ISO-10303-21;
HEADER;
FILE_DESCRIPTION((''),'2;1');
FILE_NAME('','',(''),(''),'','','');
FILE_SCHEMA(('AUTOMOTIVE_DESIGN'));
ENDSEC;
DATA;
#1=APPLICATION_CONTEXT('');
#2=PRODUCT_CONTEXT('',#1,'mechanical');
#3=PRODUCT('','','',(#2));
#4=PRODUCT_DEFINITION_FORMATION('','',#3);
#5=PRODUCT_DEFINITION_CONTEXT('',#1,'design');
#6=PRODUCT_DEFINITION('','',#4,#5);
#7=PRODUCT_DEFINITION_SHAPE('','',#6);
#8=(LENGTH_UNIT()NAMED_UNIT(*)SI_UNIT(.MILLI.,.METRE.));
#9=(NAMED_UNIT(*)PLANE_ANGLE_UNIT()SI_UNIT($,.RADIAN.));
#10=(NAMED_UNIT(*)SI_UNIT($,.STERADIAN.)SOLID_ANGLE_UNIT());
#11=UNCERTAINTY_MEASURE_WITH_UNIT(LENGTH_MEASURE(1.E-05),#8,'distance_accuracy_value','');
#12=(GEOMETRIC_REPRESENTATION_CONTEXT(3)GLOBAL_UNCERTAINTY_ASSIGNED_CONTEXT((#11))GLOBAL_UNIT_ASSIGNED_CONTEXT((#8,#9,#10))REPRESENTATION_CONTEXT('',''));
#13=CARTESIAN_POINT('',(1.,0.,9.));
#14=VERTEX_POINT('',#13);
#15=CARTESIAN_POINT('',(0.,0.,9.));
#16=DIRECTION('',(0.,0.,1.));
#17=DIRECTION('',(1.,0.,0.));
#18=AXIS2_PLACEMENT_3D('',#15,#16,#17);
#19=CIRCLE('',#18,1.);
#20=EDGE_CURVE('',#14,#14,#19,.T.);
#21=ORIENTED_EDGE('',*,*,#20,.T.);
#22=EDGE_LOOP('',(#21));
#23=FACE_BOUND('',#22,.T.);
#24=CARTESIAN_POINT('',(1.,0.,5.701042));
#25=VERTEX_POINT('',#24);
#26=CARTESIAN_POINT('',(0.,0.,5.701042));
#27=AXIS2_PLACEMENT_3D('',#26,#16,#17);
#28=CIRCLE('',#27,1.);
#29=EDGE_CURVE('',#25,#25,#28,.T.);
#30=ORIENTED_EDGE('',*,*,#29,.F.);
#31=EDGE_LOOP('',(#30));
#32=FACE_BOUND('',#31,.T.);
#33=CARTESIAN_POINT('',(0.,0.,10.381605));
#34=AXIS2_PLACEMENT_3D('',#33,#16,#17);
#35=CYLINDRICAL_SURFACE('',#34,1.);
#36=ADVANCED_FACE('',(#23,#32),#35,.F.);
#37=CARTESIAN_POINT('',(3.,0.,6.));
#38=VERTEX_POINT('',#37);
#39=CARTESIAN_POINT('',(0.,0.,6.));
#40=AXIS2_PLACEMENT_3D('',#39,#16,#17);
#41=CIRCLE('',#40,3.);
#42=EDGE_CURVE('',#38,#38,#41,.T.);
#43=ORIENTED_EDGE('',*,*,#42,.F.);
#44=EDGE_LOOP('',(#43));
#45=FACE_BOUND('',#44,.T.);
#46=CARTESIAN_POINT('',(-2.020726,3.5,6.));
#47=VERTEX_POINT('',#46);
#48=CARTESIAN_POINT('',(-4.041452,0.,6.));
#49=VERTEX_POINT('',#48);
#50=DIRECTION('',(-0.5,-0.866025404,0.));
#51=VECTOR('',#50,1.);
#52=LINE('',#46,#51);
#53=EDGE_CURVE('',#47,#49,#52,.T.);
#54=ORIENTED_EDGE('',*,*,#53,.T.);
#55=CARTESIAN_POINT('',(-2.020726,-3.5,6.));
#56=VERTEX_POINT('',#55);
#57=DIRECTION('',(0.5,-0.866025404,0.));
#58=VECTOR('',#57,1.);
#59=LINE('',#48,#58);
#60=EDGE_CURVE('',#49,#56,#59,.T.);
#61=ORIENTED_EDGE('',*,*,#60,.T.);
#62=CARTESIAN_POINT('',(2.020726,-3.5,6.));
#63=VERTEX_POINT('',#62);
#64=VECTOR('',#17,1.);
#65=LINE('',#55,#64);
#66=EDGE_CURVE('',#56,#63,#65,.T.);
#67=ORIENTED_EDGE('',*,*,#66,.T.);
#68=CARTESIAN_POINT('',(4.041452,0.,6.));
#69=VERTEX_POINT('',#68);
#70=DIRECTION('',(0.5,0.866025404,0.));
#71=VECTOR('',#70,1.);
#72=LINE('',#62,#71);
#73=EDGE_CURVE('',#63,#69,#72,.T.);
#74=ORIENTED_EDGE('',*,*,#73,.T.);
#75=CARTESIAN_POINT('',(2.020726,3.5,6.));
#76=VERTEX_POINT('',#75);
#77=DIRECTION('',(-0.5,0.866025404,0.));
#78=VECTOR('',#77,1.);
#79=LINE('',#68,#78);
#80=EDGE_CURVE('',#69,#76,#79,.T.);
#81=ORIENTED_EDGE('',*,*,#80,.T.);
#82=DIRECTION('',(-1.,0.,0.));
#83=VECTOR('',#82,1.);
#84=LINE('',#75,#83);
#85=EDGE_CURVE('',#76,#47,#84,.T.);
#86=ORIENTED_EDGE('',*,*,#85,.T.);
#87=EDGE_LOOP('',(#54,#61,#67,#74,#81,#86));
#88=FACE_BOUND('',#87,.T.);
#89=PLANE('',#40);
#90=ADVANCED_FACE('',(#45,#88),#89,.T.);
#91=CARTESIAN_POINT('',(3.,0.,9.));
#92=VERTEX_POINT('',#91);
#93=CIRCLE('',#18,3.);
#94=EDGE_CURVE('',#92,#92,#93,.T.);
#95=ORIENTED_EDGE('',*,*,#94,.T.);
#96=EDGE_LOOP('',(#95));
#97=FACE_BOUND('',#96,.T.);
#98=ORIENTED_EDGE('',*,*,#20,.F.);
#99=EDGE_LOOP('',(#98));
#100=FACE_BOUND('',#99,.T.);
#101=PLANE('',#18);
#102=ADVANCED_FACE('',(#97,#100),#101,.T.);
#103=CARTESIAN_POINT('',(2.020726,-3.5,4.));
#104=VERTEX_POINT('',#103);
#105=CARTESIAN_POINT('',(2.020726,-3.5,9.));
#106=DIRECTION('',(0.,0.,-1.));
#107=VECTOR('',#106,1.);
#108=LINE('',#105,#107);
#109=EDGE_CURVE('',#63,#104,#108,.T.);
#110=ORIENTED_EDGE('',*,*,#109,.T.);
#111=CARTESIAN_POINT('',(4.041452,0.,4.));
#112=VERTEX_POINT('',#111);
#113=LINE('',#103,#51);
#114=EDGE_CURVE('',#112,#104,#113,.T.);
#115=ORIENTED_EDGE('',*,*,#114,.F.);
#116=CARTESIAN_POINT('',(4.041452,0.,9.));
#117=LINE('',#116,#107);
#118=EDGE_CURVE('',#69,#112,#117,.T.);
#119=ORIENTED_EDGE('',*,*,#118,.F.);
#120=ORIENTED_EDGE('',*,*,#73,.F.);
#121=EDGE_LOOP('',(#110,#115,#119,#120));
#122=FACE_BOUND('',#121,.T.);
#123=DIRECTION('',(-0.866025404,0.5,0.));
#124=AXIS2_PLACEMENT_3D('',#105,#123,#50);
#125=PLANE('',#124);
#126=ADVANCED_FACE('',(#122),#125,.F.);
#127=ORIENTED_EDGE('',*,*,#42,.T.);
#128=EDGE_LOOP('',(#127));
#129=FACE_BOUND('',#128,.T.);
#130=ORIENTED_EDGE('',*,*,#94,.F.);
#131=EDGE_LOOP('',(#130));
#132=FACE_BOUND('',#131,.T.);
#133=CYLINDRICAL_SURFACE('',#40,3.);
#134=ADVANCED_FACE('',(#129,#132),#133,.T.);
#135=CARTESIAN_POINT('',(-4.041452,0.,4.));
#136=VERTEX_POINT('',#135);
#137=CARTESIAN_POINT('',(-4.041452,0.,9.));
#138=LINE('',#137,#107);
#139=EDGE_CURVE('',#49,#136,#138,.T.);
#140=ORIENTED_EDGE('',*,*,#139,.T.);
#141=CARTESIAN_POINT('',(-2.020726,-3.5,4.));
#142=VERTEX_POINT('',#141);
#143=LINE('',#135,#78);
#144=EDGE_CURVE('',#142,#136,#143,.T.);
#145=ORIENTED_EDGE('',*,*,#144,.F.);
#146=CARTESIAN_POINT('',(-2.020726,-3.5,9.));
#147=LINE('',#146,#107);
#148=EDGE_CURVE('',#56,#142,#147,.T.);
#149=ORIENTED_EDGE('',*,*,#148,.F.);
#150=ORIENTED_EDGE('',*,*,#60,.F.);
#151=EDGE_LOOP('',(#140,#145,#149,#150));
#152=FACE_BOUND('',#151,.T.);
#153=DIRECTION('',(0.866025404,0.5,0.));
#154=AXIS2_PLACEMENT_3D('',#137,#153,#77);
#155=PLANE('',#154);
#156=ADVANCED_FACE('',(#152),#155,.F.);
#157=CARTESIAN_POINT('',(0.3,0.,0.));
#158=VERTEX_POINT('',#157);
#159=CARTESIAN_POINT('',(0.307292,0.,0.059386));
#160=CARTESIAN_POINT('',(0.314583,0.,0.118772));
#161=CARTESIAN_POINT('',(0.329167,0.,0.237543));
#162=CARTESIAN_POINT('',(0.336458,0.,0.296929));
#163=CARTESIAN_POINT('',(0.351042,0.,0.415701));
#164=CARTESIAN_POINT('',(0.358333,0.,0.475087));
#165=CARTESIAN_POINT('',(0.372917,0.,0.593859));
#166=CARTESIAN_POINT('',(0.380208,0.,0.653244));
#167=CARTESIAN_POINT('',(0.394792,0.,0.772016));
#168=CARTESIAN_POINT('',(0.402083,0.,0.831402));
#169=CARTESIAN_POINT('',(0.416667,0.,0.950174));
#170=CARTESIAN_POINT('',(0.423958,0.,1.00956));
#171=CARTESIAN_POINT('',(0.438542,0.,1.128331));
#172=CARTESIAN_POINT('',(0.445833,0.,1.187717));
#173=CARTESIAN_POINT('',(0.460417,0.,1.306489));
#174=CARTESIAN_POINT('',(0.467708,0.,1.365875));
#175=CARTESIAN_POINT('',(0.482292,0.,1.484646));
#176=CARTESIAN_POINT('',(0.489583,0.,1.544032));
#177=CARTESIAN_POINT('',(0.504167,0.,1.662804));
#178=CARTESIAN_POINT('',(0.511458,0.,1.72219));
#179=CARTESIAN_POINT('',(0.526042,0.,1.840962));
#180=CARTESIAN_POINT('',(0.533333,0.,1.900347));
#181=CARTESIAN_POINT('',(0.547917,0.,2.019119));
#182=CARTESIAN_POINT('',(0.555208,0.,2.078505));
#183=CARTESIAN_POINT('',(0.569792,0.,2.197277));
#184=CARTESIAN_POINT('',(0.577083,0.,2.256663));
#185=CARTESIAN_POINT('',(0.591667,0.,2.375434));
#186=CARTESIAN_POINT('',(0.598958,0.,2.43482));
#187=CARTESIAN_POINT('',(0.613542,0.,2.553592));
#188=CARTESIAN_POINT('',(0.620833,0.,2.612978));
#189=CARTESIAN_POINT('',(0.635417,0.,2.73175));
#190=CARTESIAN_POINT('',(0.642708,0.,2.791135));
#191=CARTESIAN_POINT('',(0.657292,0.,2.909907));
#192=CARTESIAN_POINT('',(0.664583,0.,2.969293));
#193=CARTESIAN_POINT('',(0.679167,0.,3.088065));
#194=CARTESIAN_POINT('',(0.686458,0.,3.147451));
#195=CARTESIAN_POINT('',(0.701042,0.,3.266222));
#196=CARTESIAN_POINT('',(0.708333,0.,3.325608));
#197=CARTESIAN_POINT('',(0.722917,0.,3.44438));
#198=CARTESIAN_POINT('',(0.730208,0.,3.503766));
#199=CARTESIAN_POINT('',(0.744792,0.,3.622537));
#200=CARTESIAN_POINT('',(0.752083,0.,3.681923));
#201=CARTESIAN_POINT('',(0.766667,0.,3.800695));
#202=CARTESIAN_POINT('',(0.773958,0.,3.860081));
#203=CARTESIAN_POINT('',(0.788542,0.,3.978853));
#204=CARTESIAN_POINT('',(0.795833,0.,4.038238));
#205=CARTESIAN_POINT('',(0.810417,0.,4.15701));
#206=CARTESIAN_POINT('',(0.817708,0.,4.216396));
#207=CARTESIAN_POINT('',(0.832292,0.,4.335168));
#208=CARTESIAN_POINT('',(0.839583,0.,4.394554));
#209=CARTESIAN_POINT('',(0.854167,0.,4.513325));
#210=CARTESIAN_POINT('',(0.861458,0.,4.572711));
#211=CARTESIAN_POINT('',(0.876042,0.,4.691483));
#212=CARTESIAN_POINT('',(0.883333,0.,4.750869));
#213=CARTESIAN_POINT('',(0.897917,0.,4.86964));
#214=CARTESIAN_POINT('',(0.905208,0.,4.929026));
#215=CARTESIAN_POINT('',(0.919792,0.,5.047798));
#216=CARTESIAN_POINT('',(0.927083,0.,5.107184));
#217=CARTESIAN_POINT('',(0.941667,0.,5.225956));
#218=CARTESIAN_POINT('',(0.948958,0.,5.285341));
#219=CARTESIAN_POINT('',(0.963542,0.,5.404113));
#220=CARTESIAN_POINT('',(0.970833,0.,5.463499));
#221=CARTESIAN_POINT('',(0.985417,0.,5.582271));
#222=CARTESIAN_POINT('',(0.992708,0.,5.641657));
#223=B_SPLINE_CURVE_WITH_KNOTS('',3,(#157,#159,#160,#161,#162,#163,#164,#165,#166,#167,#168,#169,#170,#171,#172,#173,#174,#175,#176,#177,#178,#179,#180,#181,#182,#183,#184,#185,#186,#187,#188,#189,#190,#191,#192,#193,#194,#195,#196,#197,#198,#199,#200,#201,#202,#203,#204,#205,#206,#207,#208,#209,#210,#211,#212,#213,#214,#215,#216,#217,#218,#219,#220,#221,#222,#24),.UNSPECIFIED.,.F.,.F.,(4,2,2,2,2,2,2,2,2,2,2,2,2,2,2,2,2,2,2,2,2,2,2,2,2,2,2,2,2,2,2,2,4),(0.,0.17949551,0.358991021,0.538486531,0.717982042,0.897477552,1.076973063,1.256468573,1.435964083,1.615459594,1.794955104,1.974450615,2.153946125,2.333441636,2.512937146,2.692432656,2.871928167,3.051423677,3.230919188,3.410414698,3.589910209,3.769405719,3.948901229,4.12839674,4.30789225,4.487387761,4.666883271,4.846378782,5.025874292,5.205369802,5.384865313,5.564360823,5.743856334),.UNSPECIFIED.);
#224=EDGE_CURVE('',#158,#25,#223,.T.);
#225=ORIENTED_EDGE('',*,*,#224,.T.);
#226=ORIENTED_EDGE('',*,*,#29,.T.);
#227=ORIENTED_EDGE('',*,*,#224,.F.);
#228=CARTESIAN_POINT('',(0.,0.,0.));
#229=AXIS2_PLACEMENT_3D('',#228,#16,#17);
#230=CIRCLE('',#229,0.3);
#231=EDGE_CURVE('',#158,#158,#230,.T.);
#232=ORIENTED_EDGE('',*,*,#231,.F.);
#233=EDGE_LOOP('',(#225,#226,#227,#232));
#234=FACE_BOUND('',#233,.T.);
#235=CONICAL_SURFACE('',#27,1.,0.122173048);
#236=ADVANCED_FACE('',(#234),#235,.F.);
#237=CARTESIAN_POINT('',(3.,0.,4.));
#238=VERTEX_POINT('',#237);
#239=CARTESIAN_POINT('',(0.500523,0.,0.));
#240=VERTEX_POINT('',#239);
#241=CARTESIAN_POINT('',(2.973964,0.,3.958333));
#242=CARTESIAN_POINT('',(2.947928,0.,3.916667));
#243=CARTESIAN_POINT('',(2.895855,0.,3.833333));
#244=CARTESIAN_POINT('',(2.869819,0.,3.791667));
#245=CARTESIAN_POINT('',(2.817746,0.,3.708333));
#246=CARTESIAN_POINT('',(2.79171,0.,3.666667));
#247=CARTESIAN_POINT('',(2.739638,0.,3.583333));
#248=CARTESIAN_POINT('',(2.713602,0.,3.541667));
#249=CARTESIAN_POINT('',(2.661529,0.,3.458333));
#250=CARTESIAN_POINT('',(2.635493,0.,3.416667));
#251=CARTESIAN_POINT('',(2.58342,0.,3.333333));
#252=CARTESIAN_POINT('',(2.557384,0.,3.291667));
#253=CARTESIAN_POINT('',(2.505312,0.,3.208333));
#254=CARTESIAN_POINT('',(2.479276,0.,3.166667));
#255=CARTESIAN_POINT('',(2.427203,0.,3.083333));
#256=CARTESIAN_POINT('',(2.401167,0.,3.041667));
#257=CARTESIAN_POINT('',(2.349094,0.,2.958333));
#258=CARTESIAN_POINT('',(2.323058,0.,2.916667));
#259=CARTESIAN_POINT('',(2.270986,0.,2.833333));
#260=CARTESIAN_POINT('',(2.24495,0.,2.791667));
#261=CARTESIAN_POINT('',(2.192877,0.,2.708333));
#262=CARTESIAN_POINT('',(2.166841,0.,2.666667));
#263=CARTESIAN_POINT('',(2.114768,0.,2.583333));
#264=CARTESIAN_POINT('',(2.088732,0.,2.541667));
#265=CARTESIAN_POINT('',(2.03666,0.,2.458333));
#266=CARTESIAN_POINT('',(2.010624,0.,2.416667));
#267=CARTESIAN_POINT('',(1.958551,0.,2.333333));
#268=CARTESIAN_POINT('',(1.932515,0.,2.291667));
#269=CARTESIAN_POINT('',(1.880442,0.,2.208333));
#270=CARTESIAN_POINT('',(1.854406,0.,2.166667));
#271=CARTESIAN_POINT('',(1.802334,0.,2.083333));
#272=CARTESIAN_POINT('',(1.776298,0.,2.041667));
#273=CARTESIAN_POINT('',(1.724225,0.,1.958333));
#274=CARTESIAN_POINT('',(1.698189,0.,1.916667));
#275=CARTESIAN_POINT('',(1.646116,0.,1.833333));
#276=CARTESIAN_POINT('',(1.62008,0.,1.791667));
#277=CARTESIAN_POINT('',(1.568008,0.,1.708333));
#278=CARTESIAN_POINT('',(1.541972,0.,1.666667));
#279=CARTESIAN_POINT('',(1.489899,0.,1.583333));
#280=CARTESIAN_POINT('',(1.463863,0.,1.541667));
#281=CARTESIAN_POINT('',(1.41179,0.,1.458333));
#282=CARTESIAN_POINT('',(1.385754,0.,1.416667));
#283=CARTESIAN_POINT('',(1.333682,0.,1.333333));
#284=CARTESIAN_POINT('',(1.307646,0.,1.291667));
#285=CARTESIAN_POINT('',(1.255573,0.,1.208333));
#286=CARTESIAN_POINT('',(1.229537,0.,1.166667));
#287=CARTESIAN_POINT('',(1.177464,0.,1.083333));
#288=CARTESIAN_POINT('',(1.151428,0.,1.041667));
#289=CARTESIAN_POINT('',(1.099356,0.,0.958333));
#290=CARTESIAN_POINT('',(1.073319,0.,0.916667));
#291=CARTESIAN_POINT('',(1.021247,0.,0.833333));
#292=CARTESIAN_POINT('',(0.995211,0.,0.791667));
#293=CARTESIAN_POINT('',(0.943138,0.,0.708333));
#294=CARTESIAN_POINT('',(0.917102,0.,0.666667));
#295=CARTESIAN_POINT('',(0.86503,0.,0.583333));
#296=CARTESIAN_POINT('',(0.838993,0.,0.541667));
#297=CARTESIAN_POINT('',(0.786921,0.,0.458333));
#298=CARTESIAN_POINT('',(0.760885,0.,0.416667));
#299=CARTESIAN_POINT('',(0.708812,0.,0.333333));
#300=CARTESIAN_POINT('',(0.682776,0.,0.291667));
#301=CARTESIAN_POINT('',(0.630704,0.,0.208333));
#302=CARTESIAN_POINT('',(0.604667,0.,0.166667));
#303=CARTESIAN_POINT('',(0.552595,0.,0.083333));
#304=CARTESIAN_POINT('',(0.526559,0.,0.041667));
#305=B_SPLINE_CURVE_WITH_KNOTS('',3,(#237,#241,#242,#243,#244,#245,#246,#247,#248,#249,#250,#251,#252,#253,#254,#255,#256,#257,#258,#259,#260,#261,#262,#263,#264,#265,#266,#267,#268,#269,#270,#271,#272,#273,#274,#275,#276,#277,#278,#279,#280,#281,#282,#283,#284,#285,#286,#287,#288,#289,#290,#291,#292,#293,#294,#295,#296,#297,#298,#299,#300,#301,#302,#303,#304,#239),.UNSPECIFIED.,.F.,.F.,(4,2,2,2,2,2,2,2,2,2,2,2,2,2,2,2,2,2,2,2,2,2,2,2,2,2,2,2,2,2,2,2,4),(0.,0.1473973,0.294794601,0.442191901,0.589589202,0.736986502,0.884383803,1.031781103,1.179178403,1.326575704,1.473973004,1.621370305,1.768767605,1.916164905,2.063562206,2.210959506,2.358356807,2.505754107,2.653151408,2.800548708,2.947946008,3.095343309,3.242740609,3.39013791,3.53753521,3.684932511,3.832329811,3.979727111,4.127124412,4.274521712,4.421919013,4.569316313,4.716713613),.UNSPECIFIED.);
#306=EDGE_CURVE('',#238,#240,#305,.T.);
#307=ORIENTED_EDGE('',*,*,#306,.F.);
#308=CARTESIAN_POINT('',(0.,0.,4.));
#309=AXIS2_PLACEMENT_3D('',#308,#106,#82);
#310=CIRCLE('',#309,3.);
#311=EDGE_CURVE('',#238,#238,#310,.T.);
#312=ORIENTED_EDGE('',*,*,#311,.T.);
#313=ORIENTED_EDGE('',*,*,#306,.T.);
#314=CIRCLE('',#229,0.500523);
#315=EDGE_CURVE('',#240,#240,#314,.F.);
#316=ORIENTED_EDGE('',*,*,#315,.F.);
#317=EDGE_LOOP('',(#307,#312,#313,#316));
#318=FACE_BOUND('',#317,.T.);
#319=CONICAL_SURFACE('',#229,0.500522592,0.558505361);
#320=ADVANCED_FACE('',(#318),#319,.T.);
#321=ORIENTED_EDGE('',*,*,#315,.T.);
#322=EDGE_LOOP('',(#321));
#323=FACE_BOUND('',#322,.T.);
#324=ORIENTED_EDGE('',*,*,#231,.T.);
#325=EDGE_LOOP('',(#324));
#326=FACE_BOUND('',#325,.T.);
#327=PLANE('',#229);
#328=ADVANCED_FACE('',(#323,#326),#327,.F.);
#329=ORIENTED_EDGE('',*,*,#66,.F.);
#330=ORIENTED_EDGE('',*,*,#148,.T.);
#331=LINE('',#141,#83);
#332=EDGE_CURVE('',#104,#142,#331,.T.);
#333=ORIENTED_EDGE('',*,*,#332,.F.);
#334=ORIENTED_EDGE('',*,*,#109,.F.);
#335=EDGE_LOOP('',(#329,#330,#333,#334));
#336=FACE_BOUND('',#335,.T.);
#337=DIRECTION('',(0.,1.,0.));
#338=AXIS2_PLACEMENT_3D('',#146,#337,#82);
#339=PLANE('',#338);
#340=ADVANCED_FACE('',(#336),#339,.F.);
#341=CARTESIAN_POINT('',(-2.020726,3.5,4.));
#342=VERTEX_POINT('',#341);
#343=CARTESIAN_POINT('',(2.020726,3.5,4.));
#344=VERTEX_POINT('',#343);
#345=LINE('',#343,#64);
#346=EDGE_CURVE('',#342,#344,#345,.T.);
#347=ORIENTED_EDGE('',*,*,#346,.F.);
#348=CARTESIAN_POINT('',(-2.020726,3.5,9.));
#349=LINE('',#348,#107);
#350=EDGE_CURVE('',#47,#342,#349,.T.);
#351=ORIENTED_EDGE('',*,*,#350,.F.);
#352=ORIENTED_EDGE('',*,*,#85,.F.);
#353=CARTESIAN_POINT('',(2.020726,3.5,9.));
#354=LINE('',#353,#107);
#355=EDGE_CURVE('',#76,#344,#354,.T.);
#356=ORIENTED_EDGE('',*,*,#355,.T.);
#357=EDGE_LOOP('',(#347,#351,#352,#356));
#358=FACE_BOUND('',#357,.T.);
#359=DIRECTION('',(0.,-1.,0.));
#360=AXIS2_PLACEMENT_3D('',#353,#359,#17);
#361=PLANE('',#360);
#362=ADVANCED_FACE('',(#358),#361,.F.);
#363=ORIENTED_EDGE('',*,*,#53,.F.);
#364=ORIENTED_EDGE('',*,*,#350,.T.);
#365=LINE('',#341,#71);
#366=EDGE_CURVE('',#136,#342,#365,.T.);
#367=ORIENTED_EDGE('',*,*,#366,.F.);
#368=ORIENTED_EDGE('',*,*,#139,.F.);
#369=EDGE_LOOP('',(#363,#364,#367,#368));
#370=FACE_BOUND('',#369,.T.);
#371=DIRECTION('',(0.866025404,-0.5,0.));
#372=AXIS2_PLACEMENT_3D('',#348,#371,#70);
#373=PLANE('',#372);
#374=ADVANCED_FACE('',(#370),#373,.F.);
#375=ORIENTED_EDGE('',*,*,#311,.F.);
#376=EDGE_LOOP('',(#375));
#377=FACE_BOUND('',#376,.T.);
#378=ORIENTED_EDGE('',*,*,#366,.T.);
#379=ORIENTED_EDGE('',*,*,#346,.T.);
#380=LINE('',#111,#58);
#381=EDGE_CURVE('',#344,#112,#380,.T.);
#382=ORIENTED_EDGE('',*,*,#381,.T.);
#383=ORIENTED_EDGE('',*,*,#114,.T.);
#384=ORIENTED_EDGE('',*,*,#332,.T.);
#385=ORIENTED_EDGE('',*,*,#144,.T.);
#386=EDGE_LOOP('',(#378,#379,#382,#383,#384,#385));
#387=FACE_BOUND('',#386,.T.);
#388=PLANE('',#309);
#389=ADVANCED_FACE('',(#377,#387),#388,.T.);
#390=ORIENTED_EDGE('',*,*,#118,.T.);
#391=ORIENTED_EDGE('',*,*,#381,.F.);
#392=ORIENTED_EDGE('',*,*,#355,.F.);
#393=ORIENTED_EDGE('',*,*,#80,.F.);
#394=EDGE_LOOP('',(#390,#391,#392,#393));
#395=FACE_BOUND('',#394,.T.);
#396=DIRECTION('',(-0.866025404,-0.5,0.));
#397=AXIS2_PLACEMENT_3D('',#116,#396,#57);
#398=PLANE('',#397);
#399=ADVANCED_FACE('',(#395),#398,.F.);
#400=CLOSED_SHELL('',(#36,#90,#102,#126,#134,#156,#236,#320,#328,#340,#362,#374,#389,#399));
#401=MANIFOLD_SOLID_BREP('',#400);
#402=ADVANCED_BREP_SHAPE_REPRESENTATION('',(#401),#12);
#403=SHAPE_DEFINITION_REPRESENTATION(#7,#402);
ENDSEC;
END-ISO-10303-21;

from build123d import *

# Parameters (mm, degrees)
BOSS_EXTRU_1_DEPTH      = 9
ESQUISSE2_W             = 19.623971562
ESQUISSE2_H             = 15.534154535
ESQUISSE2_R             = 3
ENL_V_MAT_EXTRU_1_DEPTH = 3
ENL_V_START             = -4
ESQUISSE3_W             = 11.267201257
ESQUISSE3_H             = 13.961169169
ESQUISSE3_R             = 3
ENL_V_MAT_EXTRU_2_DEPTH = 4
CHANFREIN1_SIZE         = 4
CHANFREIN1_SIZE_2       = 2.499477408


with BuildPart() as part:
    # Esquisse1 → Boss.-Extru.1 (new body)
    with BuildSketch(Plane.XY):
        Polygon((4.041451884, 0), (2.020725942, 3.5), (-2.020725942, 3.5), (-4.041451884, 0), (-2.020725942, -3.5), (2.020725942, -3.5), align=None)
    extrude(amount=BOSS_EXTRU_1_DEPTH)

    # Esquisse2 → Enlèv. mat.-Extru.1 (cut)
    with BuildSketch(Plane.XY.offset(9)):
        with Locations((0.327116653, -1.544441398)):
            Rectangle(ESQUISSE2_W, ESQUISSE2_H)
        Circle(ESQUISSE2_R, mode=Mode.SUBTRACT)
    extrude(amount=-ENL_V_MAT_EXTRU_1_DEPTH, mode=Mode.SUBTRACT)

    # Esquisse3 → Enlèv. mat.-Extru.2 (cut)
    with BuildSketch(Plane(origin=(0, 0, 0), x_dir=(-1, 0, 0), z_dir=(0, 0, -1)).offset(ENL_V_START)):
        with Locations((0.009770186, 0.039262349)):
            Rectangle(ESQUISSE3_W, ESQUISSE3_H)
        with Locations(Location((0, 0, 0), (0, 0, 180))):
            Circle(ESQUISSE3_R, mode=Mode.SUBTRACT)
    extrude(amount=ENL_V_MAT_EXTRU_2_DEPTH, mode=Mode.SUBTRACT)

    # Chanfrein1
    # the kernel refuses this chamfer: 4, 2.499477408 mm, written as the material it takes off along each edge
    with BuildSketch(Plane(origin=(0, 0, 0), x_dir=(1, 0, 0), z_dir=(0, 1, 0))) as chanfrein1_piece_1_section:
        Polygon((3, -CHANFREIN1_SIZE), (3 - CHANFREIN1_SIZE_2, 0), (3, 0), align=None)
    chanfrein1_piece_1 = revolve(axis=Axis((0, 0, 0), (0, 0, -1)), mode=Mode.PRIVATE)
    chanfrein1_piece_1 = split(chanfrein1_piece_1, bisect_by=Plane(origin=(-1.744026904, 0, 4), z_dir=(0, 0, -1)), keep=Keep.TOP, mode=Mode.PRIVATE)
    add(chanfrein1_piece_1, mode=Mode.SUBTRACT)

    # Esquisse4 → Enlèvement de matière-Révolution1 (revolve, cut)
    with BuildSketch(Plane(origin=(0, 0, 0), x_dir=(1, 0, 0), z_dir=(0, 1, 0))):
        Polygon((0, -9), (1, -9), (1, -5.7010425), (0.3, 0), (0, 0), align=None)
    revolve(axis=Axis((0, 0, 10.381605157), (0, 0, -1)), mode=Mode.SUBTRACT)


solid = part.part
